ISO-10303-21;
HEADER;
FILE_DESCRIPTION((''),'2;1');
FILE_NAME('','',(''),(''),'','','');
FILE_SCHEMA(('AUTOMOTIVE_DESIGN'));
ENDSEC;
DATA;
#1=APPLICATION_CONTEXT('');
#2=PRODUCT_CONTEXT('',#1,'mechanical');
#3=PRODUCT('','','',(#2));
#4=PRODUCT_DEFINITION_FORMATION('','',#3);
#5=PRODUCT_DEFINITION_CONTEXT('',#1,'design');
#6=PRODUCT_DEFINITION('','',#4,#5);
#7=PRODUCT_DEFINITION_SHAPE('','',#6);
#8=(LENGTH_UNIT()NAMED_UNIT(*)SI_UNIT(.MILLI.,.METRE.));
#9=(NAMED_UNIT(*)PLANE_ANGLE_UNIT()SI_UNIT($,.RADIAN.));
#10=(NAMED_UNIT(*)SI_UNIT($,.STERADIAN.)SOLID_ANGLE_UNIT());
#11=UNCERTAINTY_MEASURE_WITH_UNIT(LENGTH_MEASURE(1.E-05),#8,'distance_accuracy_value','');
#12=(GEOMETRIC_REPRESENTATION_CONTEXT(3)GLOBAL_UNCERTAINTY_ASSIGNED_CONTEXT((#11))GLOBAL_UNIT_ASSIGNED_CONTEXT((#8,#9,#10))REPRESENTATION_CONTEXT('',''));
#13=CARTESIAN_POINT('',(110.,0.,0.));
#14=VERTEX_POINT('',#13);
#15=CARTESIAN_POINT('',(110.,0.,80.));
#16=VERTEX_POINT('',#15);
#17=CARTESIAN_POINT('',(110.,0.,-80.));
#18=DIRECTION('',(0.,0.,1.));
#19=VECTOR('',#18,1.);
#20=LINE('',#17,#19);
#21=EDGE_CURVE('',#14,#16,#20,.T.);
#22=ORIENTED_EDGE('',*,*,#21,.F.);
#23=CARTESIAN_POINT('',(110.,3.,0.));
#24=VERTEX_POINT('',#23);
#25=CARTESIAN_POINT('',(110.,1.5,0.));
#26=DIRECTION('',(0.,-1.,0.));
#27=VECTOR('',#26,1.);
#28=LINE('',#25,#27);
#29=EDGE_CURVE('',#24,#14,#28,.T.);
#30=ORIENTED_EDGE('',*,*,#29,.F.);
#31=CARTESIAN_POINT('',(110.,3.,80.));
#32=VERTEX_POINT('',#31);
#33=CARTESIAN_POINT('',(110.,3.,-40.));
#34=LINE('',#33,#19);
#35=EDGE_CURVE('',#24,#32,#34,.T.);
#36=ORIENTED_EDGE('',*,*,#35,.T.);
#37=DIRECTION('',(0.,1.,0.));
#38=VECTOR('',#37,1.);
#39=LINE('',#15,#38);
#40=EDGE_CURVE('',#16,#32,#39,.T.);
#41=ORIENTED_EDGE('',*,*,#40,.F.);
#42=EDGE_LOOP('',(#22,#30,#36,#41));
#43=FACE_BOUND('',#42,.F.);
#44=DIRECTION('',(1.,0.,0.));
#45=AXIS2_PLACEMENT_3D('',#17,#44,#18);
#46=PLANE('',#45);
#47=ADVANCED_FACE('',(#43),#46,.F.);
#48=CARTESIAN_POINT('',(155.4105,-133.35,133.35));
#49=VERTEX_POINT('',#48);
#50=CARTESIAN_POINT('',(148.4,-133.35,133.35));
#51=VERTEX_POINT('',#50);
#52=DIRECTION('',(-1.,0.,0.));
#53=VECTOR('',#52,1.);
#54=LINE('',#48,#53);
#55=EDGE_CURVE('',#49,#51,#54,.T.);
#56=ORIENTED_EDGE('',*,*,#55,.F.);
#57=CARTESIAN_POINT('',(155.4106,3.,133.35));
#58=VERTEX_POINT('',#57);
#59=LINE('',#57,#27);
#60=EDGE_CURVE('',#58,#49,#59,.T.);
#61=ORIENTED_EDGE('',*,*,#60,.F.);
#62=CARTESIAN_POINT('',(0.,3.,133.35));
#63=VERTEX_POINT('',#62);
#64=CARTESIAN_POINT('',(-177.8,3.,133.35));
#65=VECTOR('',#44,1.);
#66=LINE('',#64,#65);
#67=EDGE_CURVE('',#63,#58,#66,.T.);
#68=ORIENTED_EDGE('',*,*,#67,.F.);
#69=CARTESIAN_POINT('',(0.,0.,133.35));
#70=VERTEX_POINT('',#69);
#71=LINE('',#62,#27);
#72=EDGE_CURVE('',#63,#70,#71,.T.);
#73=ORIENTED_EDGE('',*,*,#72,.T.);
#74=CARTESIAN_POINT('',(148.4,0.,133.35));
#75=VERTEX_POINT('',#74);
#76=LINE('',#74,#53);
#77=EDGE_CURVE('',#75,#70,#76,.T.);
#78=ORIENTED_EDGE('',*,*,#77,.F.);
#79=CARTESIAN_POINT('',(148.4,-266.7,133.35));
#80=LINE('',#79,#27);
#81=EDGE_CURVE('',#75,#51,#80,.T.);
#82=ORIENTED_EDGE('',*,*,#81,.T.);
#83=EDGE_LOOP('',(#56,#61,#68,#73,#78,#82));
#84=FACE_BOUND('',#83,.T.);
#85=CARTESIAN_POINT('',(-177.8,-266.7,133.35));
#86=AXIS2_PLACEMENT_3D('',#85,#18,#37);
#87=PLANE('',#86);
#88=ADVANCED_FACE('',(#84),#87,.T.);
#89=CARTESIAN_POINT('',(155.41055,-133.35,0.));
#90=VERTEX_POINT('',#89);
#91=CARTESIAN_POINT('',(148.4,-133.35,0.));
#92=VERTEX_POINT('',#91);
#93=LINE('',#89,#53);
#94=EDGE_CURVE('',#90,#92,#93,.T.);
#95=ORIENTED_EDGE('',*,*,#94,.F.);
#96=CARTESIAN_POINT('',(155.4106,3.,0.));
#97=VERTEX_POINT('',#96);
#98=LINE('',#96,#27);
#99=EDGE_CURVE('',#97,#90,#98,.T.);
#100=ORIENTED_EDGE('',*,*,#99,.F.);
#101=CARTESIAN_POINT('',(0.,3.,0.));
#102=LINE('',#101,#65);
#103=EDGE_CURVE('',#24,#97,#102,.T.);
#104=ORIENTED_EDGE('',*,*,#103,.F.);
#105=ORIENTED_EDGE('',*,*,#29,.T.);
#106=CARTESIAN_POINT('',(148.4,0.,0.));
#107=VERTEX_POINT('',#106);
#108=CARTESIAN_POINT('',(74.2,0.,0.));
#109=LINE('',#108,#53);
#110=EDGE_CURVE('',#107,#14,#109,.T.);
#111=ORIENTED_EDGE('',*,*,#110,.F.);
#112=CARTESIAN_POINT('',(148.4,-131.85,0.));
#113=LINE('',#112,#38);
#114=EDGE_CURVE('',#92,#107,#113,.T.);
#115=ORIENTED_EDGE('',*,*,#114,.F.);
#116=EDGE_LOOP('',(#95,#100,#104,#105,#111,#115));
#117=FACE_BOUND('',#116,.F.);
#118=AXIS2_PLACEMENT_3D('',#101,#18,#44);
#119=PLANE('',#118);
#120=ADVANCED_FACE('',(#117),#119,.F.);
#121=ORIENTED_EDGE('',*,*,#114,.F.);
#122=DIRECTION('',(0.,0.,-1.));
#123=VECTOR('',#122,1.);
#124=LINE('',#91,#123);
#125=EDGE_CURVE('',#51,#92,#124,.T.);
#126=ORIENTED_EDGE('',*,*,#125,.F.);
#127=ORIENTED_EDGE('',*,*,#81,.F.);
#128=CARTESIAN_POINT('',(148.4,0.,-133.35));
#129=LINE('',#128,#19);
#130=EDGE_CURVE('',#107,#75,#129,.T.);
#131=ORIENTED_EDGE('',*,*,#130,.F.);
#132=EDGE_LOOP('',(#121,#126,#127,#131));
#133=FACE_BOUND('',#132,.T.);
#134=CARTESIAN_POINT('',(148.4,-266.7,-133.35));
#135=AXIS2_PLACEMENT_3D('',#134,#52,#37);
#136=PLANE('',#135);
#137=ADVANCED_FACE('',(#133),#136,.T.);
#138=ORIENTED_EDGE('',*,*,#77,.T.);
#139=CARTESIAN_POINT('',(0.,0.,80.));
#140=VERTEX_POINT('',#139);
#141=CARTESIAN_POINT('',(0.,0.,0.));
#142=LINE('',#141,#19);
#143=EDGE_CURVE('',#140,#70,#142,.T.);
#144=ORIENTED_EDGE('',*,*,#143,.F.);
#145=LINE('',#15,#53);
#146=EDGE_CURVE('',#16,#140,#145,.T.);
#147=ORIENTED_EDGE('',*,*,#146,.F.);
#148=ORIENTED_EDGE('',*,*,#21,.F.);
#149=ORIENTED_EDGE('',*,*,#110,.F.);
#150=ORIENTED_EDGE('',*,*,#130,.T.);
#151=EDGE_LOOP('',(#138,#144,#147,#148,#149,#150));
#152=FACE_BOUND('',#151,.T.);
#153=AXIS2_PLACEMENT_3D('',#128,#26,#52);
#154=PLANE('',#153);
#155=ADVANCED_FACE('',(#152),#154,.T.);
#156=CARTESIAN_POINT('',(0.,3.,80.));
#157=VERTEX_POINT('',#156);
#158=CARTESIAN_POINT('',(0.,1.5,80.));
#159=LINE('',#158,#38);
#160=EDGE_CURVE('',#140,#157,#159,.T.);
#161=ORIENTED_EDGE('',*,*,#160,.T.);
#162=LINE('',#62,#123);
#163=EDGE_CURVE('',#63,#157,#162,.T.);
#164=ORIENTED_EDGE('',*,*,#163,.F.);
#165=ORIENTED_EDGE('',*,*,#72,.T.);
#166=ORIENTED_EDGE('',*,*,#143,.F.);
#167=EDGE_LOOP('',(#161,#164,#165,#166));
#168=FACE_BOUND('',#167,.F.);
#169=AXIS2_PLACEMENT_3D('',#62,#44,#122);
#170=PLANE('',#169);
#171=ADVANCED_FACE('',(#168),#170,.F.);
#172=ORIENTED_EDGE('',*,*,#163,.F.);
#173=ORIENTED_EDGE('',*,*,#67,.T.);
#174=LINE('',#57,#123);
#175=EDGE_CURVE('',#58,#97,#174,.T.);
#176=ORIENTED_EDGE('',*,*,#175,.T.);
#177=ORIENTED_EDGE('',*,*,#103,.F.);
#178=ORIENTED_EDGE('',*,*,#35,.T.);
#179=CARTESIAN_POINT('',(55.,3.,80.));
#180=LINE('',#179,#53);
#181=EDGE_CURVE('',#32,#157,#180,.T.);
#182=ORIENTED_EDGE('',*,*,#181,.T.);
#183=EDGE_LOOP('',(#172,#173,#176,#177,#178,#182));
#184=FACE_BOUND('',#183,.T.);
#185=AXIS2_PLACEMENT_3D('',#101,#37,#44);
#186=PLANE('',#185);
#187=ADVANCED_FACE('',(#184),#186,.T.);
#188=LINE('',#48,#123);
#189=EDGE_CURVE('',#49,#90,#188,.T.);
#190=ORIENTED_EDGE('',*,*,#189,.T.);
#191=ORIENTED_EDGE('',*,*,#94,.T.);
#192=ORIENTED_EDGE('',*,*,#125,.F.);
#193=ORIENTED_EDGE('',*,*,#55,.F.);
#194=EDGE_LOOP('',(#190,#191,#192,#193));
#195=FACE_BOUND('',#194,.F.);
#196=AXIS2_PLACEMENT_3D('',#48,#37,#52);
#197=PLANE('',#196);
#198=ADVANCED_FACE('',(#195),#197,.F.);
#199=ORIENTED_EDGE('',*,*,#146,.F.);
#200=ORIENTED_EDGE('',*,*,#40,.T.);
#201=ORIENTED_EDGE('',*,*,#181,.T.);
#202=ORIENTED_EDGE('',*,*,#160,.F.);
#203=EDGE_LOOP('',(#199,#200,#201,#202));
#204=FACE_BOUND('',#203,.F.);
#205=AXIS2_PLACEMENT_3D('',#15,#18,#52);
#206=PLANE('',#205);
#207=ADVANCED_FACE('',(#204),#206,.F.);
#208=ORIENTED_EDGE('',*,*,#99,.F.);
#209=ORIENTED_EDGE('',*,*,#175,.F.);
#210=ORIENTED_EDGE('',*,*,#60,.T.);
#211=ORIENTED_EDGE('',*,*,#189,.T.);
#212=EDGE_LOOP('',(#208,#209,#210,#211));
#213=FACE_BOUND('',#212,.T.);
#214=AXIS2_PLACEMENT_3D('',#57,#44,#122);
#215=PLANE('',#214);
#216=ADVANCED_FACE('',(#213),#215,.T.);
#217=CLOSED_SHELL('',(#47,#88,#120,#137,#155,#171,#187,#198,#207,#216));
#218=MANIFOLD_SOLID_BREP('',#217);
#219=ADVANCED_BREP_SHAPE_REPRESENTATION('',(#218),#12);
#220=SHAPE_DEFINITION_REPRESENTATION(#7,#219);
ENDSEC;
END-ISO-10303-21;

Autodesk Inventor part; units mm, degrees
ref_plane "YZ Plane" through (0, 0, 0) normal (1, 0, 0) x (0, 1, 0)
ref_plane "XZ Plane" through (0, 0, 0) normal (0, 1, 0) x (-1, 0, 0)
ref_plane "XY Plane" through (0, 0, 0) normal (0, 0, 1) x (1, 0, 0)
sketch "Sketch1" plane through (0, 0, 0) normal (0, 1, 0) x (-1, 0, 0)
  line L0 (110, -80) -> (-110, -80)
  line L1 (-110, -80) -> (-110, 80)
  line L2 (-110, 80) -> (110, 80)
  line L3 (110, 80) -> (110, -80)
  line L4 (320.2117, -53.5522) -> (168.036, -53.5522) construction
  line L5 (168.036, -53.5522) -> (168.036, 90.1689) construction
  line L6 (168.036, 90.1689) -> (320.2117, 90.1689) construction
  line L7 (320.2117, 90.1689) -> (320.2117, -53.5522) construction
  line L8 (124.3, -89.75) -> (-124.3, -89.75) construction
  line L9 (-124.3, -89.75) -> (-124.3, 89.75) construction
  line L10 (-124.3, 89.75) -> (124.3, 89.75) construction
  line L11 (124.3, 89.75) -> (124.3, -89.75) construction
  line L12 (124.3, -89.75) -> (-124.3, 89.75) construction
  line L13 (-124.3, -89.75) -> (124.3, 89.75) construction
  line L14 (-152.4, -107.95) -> (152.4, -107.95)
  line L15 (152.4, -107.95) -> (152.4, 107.95)
  line L16 (152.4, 107.95) -> (-152.4, 107.95)
  line L17 (-152.4, 107.95) -> (-152.4, -107.95)
  line L18 (-152.4, -107.95) -> (152.4, 107.95) construction
  line L19 (152.4, -107.95) -> (-152.4, 107.95) construction
  line L20 (177.8, 133.35) -> (177.8, -133.35)
  line L21 (177.8, -133.35) -> (-177.8, -133.35)
  line L22 (-177.8, -133.35) -> (-177.8, 133.35)
  line L23 (-177.8, 133.35) -> (177.8, 133.35)
  point P0 (0, 0)
  dimension "d11" = 220
  dimension "d12" = 160
  dimension "d15" = 248.6
  dimension "d16" = 179.5
  dimension "d18" = 304.8
  dimension "d19" = 215.9
  dimension "d22" = 25.4
extrude "Top" add sketch "Sketch1" along normal blind 25.4 contours L17 L16 L15 L14 | L20 L21 L22 L23
sketch "Sketch3" plane through (177.8, 0, 133.35) normal (1, 0, 0) x (0, 0, -1)
  line L0 (0, 0) -> (0, 25.4) projected
  line L1 (266.7, 0) -> (266.7, 25.4) projected
  line L2 (0, 0) -> (266.7, 0)
  line L3 (266.7, 0) -> (266.7, -266.7)
  line L4 (266.7, -266.7) -> (0, -266.7)
  line L5 (0, -266.7) -> (0, 0)
  point P0 (133.35, 0)
  dimension "d25" = 266.7
extrude "Right" add sketch "Sketch3" against normal blind 50.8
sketch "Sketch4" plane through (-177.8, 0, -133.35) normal (-1, 0, 0) x (0, 0, 1)
  line L0 (0, 0) -> (0, 25.4) projected
  line L1 (266.7, -266.7) -> (266.7, 0) projected
  line L2 (0, 0) -> (266.7, 0)
  line L3 (266.7, 0) -> (266.7, -266.7)
  line L4 (266.7, -266.7) -> (0, -266.7)
  line L5 (0, -266.7) -> (0, 0)
  point P0 (133.35, 0)
  dimension "d28" = 266.7
extrude "Left" add sketch "Sketch4" against normal blind 50.8
sketch "Sketch5" plane through (0, 0, 0) normal (1, 0, 0) x (0, 1, 0)
  line L0 (-266.7, -133.35) -> (25.4, -133.35) projected
  line L1 (-266.7, 133.35) -> (-266.7, -133.35) projected
  line L2 (0, -133.35) -> (-266.7, 133.35)
  line L3 (-266.7, 133.35) -> (-275.6803, 124.3697)
  line L4 (-275.6803, 124.3697) -> (-8.9803, -142.3303)
  line L5 (-8.9803, -142.3303) -> (0, -133.35)
  point P0 (0, 0)
  dimension "d31" = 12.7
extrude "Plexiglass Cut" cut sketch "Sketch5" along normal mid plane 304.8 contours L4 L1 L2 L0 | L0 L5 L4 | L4 L3 L1
sketch "Sketch6" plane through (-177.8, -266.7, -133.35) normal (0, -1, 0) x (1, 0, 0)
  line L0 (0, 0) -> (0, 266.7) projected
  line L1 (355.6, 0) -> (0, 0) projected
  line L2 (0, 266.7) -> (355.6, 266.7)
  line L3 (355.6, 266.7) -> (355.6, 0)
  line L4 (355.6, 0) -> (0, 0)
  line L5 (0, 0) -> (0, 266.7)
  point P0 (177.8, 133.35)
extrude "Bottom" add sketch "Sketch6" along normal blind 25.4
sketch "Sketch9" plane through (0, 25.4, 0) normal (0, 1, 0) x (1, 0, 0)
  line L0 (177.8, -133.35) -> (127, -133.35) projected
  line L1 (177.8, 133.35) -> (-177.8, 133.35) projected
  line L2 (177.8, -133.35) -> (-177.8, -133.35)
  line L3 (-177.8, -133.35) -> (-177.8, 133.35)
  line L4 (-177.8, 133.35) -> (177.8, 133.35)
  line L5 (177.8, 133.35) -> (177.8, -133.35)
  point P0 (0, 0)
extrude "Top Flattening" cut sketch "Sketch9" against normal blind 22.4
sketch "Sketch10" plane through (0, 3, 0) normal (0, 1, 0) x (1, 0, 0)
  line L0 (-177.8, -133.35) -> (-177.8, 133.35) projected
  line L1 (-155.4106, 133.35) -> (-177.8, 133.35)
  line L2 (-177.8, 133.35) -> (-177.8, -133.35)
  line L3 (-177.8, -133.35) -> (-155.4106, -133.35)
  line L4 (-155.4106, -133.35) -> (-155.4106, 133.35)
  line L5 (177.8, 133.35) -> (177.8, -133.35)
  line L6 (177.8, -133.35) -> (155.4106, -133.35)
  line L7 (155.4106, -133.35) -> (155.4106, 133.35)
  line L8 (155.4106, 133.35) -> (177.8, 133.35)
  line L9 (152.4, -115.3895) -> (152.4, 133.35) projected
  point P0 (0, 0)
  point P1 (-177.8, 0)
  dimension "d48" = 22.3894
  dimension "d49" = 22.3894
extrude "Outer Side Flattening" cut sketch "Sketch10" against normal through all
sketch "Sketch11" plane through (-177.8, -292.1, -133.35) normal (0, -1, 0) x (1, 0, 0)
  line L0 (22.3894, 0) -> (333.2106, 0) projected
  line L1 (333.2106, 0) -> (22.3894, 0)
  line L2 (22.3894, 0) -> (22.3894, 266.7)
  line L3 (22.3894, 266.7) -> (333.2106, 266.7)
  line L4 (333.2106, 266.7) -> (333.2106, 0)
  point P0 (177.8, 133.35)
extrude "Bottom Flattening" cut sketch "Sketch11" against normal blind 22.4
sketch "Sketch12" plane through (155.4106, 3, -133.35) normal (0, 0, -1) x (-1, 0, 0)
  line L0 (155.4106, -3) -> (155.4106, -269.7) construction
  line L1 (7.0106, -269.7) -> (7.0106, -3)
  line L2 (7.0106, -3) -> (303.8106, -3)
  line L3 (303.8106, -3) -> (303.8106, -269.7)
  line L4 (303.8106, -269.7) -> (7.0106, -269.7)
  line L5 (7.0106, -269.7) -> (303.8106, -3) construction
  line L6 (7.0106, -3) -> (303.8106, -269.7) construction
  point P0 (155.4106, -136.35)
  point P1 (155.4106, -3)
  dimension "d54" = 296.8
extrude "Inner Flattening" cut sketch "Sketch12" against normal through all
sketch "Sketch13" plane through (-155.4106, 3, 133.35) normal (0, 0, 1) x (1, 0, 0)
  line L0 (310.8211, -272.7) -> (310.8211, 0) projected
  line L1 (0, -272.7) -> (310.8211, -272.7) projected
  line L2 (310.8211, -136.35) -> (0, -136.35)
  line L3 (0, -136.35) -> (0, -272.7)
  line L4 (0, -272.7) -> (310.8211, -272.7)
  line L5 (310.8211, -272.7) -> (310.8211, -136.35)
  point P0 (155.4106, -3)
extrude "Bottom Cut" cut sketch "Sketch13" against normal through all
sketch "Sketch14" plane through (0, 3, 0) normal (0, 1, 0) x (1, 0, 0)
  line L0 (155.4106, -133.35) -> (155.4106, 133.35) projected
  line L1 (0, 0) -> (155.4106, 0)
  line L2 (155.4106, 0) -> (155.4106, -133.35)
  line L3 (155.4106, -133.35) -> (0, -133.35)
  line L4 (0, -133.35) -> (0, 0)
  line L5 (-155.4106, 133.35) -> (-155.4106, -133.35) projected
  line L6 (155.4106, -133.35) -> (-155.4106, -133.35)
  line L7 (-155.4106, -133.35) -> (-155.4106, 133.35)
  line L8 (-155.4106, 133.35) -> (155.4106, 133.35)
  line L9 (155.4106, 133.35) -> (155.4106, -133.35)
extrude "Quarter Cut" cut sketch "Sketch14" against normal through all contours L1 L4 L6 L5 L8 L0
properties part number "Apple iPad 2022 Hologram"
